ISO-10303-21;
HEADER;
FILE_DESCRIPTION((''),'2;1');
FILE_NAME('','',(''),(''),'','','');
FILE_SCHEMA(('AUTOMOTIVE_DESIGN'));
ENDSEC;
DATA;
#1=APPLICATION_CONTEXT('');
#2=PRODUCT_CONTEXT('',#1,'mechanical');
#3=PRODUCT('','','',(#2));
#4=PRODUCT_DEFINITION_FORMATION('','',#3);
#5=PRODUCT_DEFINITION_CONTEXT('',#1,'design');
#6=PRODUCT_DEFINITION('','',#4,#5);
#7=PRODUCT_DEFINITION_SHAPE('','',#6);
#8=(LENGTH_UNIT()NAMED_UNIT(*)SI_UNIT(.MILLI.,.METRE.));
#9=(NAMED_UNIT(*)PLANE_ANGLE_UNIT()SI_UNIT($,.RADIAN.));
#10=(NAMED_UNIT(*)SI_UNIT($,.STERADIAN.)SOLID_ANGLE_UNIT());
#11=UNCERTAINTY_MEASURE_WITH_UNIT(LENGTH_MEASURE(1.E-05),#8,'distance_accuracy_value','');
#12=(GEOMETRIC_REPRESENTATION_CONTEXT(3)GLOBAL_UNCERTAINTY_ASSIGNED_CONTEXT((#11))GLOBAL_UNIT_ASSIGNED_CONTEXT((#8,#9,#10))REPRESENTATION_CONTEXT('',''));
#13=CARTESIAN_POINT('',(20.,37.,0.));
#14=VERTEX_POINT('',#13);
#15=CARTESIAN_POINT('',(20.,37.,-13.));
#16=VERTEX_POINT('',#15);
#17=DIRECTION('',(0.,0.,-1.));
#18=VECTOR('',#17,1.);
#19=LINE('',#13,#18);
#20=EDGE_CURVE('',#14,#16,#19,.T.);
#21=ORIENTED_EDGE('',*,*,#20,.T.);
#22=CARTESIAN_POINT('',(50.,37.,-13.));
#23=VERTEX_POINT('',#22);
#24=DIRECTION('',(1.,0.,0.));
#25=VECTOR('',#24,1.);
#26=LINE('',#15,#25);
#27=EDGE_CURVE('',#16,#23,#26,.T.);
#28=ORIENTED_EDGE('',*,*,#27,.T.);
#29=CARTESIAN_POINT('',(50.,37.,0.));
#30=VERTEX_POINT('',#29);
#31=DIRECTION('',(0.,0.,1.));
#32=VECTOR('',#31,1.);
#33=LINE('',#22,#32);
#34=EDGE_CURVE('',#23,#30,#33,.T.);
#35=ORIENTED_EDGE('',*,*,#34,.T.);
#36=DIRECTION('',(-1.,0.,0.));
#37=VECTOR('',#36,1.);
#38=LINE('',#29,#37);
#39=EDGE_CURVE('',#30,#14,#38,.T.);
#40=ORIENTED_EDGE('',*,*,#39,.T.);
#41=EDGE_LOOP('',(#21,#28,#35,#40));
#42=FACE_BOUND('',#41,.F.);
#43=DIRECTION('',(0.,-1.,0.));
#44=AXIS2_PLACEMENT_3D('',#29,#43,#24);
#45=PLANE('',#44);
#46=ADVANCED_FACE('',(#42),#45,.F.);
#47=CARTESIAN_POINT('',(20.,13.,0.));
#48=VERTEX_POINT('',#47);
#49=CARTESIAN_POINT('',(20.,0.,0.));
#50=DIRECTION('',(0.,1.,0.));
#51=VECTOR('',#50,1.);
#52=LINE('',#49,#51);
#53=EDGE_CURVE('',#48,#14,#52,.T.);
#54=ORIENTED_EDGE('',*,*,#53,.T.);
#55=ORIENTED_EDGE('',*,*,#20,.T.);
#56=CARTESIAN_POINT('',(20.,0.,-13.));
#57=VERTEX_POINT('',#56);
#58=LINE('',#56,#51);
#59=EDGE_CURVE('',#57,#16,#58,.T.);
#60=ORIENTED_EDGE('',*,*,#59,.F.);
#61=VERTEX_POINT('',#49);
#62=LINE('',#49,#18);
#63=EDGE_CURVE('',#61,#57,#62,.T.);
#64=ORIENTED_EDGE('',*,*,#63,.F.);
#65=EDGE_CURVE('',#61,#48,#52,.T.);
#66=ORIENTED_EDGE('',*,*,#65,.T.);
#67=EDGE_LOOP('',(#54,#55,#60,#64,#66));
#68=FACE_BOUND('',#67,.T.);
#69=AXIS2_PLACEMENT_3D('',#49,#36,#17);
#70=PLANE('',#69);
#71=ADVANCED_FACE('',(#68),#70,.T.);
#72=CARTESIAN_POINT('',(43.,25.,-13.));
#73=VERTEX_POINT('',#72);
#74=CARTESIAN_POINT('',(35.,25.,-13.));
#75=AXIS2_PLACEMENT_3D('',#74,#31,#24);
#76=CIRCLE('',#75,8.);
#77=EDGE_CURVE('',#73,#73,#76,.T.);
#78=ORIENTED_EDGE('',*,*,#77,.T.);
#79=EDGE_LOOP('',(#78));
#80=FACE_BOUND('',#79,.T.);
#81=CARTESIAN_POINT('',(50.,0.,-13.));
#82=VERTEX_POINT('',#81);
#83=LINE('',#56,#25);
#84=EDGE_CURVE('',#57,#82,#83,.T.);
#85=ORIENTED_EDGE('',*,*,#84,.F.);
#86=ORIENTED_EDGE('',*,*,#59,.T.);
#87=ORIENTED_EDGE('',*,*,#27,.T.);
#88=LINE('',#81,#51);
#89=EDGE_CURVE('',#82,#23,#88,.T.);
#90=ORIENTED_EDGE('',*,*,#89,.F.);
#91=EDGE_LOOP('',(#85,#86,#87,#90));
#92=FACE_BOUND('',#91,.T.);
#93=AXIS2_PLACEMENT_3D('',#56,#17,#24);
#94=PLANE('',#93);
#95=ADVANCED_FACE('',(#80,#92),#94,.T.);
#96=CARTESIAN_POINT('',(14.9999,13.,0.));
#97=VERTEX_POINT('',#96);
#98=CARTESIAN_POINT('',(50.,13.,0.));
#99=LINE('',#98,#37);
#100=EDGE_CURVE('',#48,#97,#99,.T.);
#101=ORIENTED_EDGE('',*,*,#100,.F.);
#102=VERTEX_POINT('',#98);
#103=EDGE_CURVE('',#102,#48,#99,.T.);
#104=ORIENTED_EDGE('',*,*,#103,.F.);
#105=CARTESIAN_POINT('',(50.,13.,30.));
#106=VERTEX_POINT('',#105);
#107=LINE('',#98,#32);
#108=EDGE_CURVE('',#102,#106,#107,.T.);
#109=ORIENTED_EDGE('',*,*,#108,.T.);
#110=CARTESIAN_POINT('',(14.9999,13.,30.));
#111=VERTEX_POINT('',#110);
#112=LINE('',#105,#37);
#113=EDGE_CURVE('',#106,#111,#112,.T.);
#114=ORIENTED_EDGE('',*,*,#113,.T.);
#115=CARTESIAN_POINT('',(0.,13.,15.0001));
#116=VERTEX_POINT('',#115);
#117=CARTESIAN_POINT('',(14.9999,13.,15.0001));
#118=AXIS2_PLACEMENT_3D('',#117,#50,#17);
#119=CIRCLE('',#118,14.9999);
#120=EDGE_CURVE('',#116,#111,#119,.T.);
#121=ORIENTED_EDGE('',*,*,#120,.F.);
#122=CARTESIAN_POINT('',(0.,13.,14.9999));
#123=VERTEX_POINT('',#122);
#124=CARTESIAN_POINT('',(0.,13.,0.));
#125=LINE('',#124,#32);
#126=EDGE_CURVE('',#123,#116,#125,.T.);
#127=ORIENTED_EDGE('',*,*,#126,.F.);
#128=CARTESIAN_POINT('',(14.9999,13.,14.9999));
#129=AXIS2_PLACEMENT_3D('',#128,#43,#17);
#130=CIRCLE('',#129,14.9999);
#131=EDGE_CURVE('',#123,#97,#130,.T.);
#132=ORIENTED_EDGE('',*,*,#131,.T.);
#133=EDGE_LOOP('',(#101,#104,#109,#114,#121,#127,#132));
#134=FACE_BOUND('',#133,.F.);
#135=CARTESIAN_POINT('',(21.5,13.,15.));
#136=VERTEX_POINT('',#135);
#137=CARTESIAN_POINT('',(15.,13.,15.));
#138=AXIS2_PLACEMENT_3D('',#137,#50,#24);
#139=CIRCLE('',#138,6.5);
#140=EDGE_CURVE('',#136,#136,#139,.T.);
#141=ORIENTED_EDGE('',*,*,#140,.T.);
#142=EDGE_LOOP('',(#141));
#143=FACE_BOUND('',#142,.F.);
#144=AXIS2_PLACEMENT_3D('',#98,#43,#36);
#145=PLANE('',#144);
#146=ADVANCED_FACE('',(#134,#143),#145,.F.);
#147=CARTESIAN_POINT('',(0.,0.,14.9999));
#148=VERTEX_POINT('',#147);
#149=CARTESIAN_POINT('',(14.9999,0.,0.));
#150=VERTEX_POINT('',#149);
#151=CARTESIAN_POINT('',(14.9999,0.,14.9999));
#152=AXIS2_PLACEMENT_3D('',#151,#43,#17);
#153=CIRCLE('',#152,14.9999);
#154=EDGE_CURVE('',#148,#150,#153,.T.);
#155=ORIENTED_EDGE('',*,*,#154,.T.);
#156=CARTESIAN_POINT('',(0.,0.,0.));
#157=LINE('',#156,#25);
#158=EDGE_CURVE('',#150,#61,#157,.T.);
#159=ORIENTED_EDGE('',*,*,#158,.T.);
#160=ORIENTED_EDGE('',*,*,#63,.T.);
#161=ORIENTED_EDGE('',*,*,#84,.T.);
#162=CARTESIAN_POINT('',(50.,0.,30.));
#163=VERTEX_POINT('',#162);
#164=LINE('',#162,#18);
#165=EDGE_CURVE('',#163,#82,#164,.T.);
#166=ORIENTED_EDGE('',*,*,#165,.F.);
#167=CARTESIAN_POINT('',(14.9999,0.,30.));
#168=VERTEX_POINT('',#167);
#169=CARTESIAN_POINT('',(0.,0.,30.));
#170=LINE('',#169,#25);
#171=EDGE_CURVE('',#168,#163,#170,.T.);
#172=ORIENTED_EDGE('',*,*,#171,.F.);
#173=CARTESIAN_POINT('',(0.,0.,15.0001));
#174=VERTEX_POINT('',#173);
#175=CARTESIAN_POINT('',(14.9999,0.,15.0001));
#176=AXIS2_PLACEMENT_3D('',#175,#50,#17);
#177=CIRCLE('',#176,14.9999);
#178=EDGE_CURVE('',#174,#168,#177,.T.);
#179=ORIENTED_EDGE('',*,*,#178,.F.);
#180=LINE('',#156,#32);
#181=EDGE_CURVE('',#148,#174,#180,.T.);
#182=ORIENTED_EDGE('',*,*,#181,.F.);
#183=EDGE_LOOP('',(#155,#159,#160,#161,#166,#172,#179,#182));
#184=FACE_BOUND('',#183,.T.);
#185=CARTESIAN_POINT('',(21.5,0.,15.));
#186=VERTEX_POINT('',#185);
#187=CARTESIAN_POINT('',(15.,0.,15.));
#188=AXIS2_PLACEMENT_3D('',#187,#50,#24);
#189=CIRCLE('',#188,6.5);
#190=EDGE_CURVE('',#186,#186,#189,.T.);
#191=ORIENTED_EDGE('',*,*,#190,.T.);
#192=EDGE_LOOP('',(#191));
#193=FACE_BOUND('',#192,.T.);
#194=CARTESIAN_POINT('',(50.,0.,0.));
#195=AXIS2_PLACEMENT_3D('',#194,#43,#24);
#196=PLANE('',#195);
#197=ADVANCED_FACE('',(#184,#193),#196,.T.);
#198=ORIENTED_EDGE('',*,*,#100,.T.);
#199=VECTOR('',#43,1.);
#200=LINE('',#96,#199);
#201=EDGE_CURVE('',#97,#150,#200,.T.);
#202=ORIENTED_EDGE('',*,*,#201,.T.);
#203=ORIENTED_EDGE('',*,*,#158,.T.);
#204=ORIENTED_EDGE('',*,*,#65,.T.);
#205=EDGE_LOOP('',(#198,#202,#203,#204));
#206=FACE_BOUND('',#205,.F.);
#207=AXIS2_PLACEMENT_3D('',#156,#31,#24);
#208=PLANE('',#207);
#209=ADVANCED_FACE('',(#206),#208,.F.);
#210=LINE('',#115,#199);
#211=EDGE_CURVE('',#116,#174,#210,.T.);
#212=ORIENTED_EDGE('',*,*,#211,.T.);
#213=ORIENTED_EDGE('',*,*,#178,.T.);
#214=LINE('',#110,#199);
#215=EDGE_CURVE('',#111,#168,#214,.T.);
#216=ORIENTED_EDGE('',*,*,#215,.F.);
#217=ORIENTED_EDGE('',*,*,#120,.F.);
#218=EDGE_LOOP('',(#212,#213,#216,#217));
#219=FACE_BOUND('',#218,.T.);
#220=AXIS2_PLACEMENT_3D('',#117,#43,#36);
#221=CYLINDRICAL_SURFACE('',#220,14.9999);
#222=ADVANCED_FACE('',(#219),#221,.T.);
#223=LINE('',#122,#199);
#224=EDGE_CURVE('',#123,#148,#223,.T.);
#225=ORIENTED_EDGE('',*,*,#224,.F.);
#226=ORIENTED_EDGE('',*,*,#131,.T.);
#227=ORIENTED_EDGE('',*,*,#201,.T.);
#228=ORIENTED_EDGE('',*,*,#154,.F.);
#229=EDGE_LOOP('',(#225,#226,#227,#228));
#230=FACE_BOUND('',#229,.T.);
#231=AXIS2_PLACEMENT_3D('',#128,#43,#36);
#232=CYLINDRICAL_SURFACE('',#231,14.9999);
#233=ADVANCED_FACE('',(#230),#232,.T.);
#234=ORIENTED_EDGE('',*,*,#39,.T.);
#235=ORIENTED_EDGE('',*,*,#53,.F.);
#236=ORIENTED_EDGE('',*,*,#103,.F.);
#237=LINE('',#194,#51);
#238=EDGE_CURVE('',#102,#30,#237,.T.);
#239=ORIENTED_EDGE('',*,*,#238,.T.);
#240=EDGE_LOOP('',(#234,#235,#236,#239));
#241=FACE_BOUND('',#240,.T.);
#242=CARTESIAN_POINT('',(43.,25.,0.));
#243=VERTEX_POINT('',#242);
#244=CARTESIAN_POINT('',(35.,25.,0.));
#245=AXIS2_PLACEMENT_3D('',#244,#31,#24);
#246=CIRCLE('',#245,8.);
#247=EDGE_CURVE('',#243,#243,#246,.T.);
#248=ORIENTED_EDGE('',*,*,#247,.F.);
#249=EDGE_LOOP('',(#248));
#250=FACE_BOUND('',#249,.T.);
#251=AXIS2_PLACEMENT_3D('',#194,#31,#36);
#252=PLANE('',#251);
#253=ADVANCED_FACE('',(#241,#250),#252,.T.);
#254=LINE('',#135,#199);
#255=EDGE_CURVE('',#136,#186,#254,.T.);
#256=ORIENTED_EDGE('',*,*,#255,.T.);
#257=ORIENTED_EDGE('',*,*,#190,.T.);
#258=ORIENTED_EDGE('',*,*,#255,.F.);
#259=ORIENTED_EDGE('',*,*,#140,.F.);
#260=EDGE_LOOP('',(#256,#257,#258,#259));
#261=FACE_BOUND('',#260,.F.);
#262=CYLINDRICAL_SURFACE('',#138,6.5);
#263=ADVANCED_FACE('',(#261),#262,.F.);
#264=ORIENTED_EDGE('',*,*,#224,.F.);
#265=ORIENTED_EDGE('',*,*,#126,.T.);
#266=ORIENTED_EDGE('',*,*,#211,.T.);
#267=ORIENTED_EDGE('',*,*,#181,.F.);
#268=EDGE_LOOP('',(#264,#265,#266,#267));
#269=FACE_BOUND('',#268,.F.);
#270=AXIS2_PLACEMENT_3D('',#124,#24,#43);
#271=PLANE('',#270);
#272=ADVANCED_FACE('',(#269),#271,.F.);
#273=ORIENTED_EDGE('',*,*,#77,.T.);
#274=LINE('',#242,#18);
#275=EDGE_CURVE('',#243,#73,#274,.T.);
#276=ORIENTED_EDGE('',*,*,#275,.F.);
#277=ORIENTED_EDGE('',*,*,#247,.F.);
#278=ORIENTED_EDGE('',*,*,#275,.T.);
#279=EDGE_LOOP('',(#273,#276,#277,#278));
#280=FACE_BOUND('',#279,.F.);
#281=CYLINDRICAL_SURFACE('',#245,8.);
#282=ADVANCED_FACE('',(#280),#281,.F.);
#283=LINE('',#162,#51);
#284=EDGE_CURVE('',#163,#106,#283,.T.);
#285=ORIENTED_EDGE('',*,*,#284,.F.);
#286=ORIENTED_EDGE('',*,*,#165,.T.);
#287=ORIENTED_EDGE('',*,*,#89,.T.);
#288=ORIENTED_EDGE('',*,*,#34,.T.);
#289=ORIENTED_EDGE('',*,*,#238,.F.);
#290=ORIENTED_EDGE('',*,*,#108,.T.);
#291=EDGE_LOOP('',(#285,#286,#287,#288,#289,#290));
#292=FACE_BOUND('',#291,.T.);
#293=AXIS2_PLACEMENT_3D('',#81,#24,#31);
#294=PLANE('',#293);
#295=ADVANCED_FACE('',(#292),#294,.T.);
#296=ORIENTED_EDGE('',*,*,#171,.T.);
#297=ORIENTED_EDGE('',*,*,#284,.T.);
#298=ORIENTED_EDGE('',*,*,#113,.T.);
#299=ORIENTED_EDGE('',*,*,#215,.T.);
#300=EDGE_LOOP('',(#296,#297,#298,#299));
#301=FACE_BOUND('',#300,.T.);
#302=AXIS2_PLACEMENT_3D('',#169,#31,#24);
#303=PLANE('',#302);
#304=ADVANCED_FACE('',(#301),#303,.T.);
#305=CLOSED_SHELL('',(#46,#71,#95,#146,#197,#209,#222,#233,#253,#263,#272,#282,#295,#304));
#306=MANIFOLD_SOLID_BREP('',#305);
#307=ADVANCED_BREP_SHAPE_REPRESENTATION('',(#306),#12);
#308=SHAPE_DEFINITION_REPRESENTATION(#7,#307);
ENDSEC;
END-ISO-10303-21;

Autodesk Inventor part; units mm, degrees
ref_plane "YZ Plane" through (0, 0, 0) normal (1, 0, 0) x (0, 1, 0)
ref_plane "XZ Plane" through (0, 0, 0) normal (0, 1, 0) x (-1, 0, 0)
ref_plane "XY Plane" through (0, 0, 0) normal (0, 0, 1) x (1, 0, 0)
sketch "Sketch1" plane through (0, 0, 0) normal (0, 0, 1) x (1, 0, 0)
  line L0 (0, 0) -> (50, 0)
  line L1 (50, 0) -> (50, 13)
  line L2 (50, 13) -> (0, 13)
  line L3 (0, 13) -> (0, 0)
  dimension "d0" = 50
extrude "Extrusion1" add sketch "Sketch1" along normal blind 30
fillet "Fillet1" radius 15 2 edges at (0, 6.5, 30) (0, 6.5, 0)
sketch "Sketch2" plane through (50, 0, 0) normal (0, -1, 0) x (1, 0, 0)
  line L0 (0, 0) -> (-35, 0) projected
  line L1 (0, 0) -> (-30, 0)
  line L2 (-30, 0) -> (-30, -13)
  line L3 (-30, -13) -> (0, -13)
  line L4 (0, -13) -> (0, 0)
  point P0 (-50, 0)
extrude "Extrusion2" add sketch "Sketch2" against normal blind 37
sketch "Sketch3" plane through (15, 13, 30) normal (0, 1, 0) x (1, 0, 0)
  arc A0 (0, 30) -> (0, 0) centre (0, 15) ccw projected
  circle A1 centre (0, 15) radius 6.5
  point P0 (-15, 30)
  dimension "d6" = 13
extrude "Extrusion3" cut sketch "Sketch3" against normal blind 37
sketch "Sketch4" plane through (20, 13, 0) normal (0, 0, 1) x (1, 0, 0)
  circle A0 centre (15, 12) radius 8
  point P0 (-20, -13)
extrude "Extrusion4" cut sketch "Sketch4" against normal blind 13
properties part number "P3-12"
